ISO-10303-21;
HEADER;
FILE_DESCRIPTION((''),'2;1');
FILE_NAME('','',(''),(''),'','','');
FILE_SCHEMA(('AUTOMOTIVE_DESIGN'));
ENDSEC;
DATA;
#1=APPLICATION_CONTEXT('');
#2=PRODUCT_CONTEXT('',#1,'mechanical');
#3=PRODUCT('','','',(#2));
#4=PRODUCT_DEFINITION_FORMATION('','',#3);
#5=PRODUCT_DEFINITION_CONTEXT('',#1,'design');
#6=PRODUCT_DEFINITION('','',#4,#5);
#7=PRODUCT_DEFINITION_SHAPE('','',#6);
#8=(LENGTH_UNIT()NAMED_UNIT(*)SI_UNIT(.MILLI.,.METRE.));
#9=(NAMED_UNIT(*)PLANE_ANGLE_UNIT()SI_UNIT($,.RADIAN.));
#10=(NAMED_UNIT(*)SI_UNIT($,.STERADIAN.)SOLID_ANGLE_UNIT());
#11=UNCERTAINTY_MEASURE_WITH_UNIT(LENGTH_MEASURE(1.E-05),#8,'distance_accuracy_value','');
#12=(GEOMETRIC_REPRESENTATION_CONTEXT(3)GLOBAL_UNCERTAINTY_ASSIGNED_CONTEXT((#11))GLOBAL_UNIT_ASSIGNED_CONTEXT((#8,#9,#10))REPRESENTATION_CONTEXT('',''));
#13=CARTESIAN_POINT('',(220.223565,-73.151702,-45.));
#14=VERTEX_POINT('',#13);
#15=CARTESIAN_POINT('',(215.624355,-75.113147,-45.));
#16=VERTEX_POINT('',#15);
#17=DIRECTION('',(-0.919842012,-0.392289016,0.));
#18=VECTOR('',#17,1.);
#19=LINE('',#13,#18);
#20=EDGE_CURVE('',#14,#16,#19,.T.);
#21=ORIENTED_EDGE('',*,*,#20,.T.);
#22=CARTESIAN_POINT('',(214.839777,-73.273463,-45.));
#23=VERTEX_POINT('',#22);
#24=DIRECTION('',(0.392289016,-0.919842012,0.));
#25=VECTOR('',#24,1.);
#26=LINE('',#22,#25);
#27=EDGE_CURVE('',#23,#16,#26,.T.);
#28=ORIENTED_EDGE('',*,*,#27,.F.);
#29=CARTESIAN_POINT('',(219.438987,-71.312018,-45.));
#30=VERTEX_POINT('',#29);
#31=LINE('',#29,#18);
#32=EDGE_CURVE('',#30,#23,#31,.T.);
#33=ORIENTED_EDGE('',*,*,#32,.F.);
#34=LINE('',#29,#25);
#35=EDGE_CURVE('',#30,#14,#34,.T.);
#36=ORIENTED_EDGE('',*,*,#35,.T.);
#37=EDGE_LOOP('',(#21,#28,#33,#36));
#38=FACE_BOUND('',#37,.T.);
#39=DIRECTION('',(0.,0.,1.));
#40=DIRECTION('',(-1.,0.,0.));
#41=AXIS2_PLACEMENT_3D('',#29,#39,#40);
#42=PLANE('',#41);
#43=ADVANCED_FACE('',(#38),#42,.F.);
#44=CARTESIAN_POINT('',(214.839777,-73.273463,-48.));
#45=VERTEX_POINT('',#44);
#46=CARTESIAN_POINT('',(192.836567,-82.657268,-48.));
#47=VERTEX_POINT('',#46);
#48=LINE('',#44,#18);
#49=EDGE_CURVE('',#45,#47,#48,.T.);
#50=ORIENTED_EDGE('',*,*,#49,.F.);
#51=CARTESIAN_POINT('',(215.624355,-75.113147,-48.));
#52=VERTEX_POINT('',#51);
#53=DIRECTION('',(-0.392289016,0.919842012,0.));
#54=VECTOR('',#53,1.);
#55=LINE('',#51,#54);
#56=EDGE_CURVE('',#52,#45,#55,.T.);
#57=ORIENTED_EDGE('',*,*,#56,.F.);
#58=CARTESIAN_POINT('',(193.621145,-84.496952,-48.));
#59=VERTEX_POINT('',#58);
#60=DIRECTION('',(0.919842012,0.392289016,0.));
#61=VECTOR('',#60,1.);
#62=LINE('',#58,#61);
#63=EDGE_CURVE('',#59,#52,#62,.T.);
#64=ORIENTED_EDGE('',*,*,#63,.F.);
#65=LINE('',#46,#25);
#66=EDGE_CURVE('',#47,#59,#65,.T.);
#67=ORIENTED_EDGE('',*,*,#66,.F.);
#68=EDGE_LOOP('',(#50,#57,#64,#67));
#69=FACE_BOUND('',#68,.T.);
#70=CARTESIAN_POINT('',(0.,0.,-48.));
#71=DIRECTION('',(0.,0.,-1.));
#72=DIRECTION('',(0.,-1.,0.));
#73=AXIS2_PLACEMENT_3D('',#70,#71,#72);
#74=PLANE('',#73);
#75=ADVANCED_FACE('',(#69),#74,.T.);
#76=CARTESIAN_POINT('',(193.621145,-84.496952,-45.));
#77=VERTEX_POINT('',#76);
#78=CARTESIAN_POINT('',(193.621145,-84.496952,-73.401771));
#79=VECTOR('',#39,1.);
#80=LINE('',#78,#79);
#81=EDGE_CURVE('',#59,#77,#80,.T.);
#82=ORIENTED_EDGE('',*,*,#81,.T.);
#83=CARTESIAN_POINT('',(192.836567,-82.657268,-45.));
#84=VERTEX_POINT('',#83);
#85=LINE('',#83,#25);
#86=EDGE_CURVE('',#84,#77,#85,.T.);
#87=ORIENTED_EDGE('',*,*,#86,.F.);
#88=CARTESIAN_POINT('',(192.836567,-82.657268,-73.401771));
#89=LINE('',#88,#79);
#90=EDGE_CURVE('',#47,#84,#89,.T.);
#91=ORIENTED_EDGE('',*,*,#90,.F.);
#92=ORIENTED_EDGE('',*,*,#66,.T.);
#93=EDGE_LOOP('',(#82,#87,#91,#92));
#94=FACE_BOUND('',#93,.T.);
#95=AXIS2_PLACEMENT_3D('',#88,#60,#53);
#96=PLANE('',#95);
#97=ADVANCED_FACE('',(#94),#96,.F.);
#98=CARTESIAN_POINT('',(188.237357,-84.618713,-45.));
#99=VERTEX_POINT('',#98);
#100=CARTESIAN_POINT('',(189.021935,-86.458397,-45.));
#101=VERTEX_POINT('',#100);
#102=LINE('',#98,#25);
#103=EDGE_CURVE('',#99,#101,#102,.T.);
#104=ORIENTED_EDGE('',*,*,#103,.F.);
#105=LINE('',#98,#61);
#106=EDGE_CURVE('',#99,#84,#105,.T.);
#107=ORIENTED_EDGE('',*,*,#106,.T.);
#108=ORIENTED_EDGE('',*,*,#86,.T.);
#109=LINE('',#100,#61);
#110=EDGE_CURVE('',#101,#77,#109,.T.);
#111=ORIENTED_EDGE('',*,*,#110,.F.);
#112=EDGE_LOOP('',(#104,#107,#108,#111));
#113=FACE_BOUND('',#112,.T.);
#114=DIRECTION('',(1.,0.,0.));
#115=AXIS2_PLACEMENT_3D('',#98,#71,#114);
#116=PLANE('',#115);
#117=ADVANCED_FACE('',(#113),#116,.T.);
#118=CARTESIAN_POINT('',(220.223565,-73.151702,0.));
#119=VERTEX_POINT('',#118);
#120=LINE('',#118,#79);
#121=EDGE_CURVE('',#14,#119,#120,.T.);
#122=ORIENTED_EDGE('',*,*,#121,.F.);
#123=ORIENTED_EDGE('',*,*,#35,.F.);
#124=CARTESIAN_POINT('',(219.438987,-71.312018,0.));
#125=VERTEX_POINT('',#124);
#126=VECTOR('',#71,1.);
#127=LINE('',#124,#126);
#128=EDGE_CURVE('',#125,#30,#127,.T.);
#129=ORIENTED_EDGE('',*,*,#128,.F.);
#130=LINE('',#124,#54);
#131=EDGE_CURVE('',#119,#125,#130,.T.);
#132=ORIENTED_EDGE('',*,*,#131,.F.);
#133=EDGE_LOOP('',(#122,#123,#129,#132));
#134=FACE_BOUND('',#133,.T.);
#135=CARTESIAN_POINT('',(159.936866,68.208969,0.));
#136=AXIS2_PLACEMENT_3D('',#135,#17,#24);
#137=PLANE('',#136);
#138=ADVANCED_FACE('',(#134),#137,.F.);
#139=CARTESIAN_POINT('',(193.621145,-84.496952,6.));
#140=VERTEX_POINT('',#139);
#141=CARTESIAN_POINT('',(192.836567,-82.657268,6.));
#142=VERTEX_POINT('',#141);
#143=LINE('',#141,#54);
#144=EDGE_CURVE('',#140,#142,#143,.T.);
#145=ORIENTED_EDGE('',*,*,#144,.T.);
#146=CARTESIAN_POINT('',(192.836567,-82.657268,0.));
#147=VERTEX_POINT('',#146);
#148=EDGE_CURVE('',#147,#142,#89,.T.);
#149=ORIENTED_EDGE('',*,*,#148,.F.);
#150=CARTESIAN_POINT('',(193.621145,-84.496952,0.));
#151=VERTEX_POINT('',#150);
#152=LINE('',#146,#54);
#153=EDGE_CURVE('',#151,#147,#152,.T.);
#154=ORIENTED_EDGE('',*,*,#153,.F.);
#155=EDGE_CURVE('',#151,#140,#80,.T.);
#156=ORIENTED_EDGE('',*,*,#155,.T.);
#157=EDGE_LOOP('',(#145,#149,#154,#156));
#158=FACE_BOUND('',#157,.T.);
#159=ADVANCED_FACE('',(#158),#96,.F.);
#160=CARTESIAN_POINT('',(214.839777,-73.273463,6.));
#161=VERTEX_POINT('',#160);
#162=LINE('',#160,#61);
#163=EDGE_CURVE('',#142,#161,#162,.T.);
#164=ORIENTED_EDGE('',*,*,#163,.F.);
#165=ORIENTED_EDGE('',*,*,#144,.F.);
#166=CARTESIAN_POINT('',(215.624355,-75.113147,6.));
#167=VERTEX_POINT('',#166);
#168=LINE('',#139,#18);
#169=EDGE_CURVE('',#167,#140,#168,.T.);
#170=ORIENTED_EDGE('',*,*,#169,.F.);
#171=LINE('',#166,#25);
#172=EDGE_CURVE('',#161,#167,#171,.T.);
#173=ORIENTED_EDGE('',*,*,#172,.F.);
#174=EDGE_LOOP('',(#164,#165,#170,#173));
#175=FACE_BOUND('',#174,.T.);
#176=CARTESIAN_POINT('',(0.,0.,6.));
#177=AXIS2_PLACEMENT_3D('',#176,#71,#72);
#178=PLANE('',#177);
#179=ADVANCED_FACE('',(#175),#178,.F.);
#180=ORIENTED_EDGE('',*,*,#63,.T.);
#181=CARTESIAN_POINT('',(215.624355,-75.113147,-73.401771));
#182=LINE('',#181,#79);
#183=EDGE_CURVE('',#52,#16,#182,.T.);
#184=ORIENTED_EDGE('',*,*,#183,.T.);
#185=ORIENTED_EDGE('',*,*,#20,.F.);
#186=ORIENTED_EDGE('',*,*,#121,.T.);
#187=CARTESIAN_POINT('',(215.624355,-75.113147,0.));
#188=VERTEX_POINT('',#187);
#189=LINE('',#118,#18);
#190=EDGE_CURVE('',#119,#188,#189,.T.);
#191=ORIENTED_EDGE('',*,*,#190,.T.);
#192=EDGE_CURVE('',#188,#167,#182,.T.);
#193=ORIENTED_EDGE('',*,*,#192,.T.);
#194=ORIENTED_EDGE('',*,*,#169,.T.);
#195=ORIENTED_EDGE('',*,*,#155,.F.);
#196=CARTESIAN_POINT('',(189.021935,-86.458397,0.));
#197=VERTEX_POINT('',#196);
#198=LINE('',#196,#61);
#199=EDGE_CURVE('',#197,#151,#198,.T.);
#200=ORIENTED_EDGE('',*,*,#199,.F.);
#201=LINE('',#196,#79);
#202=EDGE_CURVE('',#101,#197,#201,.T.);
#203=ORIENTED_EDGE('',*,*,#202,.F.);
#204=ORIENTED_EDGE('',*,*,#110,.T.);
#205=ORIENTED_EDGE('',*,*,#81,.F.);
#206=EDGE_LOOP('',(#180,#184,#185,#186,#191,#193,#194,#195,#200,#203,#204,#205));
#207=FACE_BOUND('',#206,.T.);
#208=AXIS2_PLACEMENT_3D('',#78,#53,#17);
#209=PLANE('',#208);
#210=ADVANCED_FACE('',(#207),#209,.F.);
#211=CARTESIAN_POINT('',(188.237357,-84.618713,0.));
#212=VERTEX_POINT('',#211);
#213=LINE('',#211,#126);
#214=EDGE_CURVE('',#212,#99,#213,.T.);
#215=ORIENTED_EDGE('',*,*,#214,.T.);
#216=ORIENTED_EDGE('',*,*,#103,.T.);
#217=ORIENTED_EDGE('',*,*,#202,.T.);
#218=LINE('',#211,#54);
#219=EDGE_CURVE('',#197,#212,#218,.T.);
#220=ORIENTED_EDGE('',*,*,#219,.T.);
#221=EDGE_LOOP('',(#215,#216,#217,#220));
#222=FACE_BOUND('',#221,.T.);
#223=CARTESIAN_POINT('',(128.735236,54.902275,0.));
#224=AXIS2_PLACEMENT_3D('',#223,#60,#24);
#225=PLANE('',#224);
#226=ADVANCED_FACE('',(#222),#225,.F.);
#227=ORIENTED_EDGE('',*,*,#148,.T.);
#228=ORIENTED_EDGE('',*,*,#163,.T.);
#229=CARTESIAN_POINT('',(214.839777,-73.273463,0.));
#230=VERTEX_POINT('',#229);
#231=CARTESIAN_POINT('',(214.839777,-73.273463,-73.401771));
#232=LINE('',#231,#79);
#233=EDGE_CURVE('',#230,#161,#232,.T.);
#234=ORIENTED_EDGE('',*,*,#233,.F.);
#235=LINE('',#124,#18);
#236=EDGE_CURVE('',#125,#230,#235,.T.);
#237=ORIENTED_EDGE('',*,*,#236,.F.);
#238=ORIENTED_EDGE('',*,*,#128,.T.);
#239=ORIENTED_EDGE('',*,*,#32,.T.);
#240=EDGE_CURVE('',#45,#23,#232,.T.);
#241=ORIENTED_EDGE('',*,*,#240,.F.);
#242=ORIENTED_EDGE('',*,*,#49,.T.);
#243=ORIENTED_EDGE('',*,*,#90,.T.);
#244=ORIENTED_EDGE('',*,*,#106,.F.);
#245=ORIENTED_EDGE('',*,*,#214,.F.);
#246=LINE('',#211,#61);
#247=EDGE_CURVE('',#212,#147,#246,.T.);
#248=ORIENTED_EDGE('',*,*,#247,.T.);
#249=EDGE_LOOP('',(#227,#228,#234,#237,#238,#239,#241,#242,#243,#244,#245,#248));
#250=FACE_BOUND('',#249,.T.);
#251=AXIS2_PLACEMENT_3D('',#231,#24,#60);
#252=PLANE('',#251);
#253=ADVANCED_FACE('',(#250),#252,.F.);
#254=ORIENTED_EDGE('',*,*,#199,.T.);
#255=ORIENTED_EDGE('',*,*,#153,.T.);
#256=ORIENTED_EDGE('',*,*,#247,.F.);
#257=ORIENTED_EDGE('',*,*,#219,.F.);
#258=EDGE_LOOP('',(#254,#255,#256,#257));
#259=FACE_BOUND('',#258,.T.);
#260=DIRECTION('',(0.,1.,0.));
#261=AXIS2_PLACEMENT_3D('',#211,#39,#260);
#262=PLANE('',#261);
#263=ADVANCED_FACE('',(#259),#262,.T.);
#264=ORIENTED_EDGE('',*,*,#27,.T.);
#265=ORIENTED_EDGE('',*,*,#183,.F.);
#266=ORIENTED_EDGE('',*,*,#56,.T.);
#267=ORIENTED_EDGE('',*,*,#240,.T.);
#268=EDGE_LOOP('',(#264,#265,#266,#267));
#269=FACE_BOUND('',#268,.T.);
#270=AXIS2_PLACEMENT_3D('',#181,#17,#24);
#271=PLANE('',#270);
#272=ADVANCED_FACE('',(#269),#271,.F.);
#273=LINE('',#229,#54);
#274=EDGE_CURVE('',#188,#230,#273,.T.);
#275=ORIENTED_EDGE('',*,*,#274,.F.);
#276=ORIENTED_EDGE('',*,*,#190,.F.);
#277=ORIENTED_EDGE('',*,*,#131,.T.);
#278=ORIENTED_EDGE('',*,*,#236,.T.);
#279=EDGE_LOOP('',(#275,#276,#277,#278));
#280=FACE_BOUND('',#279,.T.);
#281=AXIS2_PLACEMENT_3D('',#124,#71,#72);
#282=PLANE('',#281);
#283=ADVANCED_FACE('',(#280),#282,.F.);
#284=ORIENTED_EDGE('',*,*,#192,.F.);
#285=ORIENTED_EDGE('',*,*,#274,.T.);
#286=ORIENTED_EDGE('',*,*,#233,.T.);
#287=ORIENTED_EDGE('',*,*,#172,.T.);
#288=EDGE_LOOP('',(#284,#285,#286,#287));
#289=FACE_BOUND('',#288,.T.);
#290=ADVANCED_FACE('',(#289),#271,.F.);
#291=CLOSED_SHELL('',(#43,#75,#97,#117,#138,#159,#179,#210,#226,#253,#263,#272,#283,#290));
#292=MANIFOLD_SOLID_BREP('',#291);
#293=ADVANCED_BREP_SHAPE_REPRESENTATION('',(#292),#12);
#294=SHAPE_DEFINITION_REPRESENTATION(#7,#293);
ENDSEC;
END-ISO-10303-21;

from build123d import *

# Parameters (mm, degrees)
ESTRUSIONE_ESTRUSIONE1_DEPTH      = 48
ESTRUSIONE_ESTRUSIONE1_DEPTH_BACK = 6
SCHIZZO2_W                        = 45
SCHIZZO2_H                        = 2
ESTRUSIONE_ESTRUSIONE2_DEPTH      = 5
CORPO_SPOSTA_COPIA1_START         = 139.953637561
CORPO_SPOSTA_COPIA1_OUTLINE_W     = 2
CORPO_SPOSTA_COPIA1_OUTLINE_H     = 42
CORPO_SPOSTA_COPIA1_DEPTH         = 33.920640211
CORPO_SPOSTA_COPIA1_2_OUTLINE_W   = 2
CORPO_SPOSTA_COPIA1_2_OUTLINE_H   = 6
CORPO_SPOSTA_COPIA1_2_DEPTH       = 5
CORPO_SPOSTA_COPIA1_START_2       = 168.874277772
CORPO_SPOSTA_COPIA1_3_OUTLINE_W   = 2
CORPO_SPOSTA_COPIA1_3_OUTLINE_H   = 6
CORPO_SPOSTA_COPIA1_3_DEPTH       = 5
CORPO_SPOSTA_COPIA1_4_OUTLINE_W   = 2
CORPO_SPOSTA_COPIA1_4_OUTLINE_H   = 45
CORPO_SPOSTA_COPIA1_4_DEPTH       = 33.920640211
CORPO_SPOSTA_COPIA1_START_3       = 144.953637561
CORPO_SPOSTA_COPIA1_5_OUTLINE_W   = 2
CORPO_SPOSTA_COPIA1_5_OUTLINE_H   = 3
CORPO_SPOSTA_COPIA1_5_DEPTH       = 23.920640211


# Read off the part's stored shape, not the designer's step: Corpo-Sposta/copia1
with BuildPart() as part:
    # Schizzo1 → Estrusione-Estrusione1 (new, two sides: drawn at the far end of the back side and taken through both)
    with BuildSketch(Plane.XY.offset(-ESTRUSIONE_ESTRUSIONE1_DEPTH_BACK)):
        Polygon((214.839776844, -73.273463404), (192.836567017, -82.657267824), (193.62114505, -84.496951848), (215.624354877, -75.113147429), align=None)
    extrude(amount=ESTRUSIONE_ESTRUSIONE1_DEPTH + ESTRUSIONE_ESTRUSIONE1_DEPTH_BACK)

    # Schizzo2 → Estrusione-Estrusione2 (add)
    with BuildSketch(Plane(origin=(155.337655494, 66.24752432, 0), x_dir=(0, 0, -1), z_dir=(0.919842012316021, 0.39228901638767966, 0))):
        with Locations((-22.5, -152.679294766)):
            Rectangle(SCHIZZO2_W, SCHIZZO2_H)
    estrusione_estrusione2 = extrude(amount=ESTRUSIONE_ESTRUSIONE2_DEPTH)

    # Specchia1: Estrusione-Estrusione2 across plane
    add(estrusione_estrusione2.mirror(Plane(origin=(144.33605058, 61.55562211, 0), x_dir=(0, 0, 1), z_dir=(0.9198420123160211, 0.3922890163876793, 0))))

    # Corpo-Sposta/copia1 outline → Corpo-Sposta/copia1 (cut)
    with BuildSketch(Plane(origin=(0, 0, 0), x_dir=(-0.39228901638766717, 0.9198420123160262, 0), z_dir=(0.9198420123160264, 0.3922890163876671, 0)).offset(CORPO_SPOSTA_COPIA1_START)):
        with Locations((-152.679294766, 27)):
            Rectangle(CORPO_SPOSTA_COPIA1_OUTLINE_W, CORPO_SPOSTA_COPIA1_OUTLINE_H)
    extrude(amount=CORPO_SPOSTA_COPIA1_DEPTH, mode=Mode.SUBTRACT)

    # Corpo-Sposta_copia1 2 outline → Corpo-Sposta_copia1 2 (cut)
    with BuildSketch(Plane(origin=(0, 0, 0), x_dir=(-0.39228901638766717, 0.9198420123160262, 0), z_dir=(0.9198420123160264, 0.3922890163876671, 0)).offset(CORPO_SPOSTA_COPIA1_START)):
        with Locations((-152.679294766, 3)):
            Rectangle(CORPO_SPOSTA_COPIA1_2_OUTLINE_W, CORPO_SPOSTA_COPIA1_2_OUTLINE_H)
    extrude(amount=CORPO_SPOSTA_COPIA1_2_DEPTH, mode=Mode.SUBTRACT)

    # Corpo-Sposta_copia1 3 outline → Corpo-Sposta_copia1 3 (cut)
    with BuildSketch(Plane(origin=(0, 0, 0), x_dir=(-0.39228901638766717, 0.9198420123160262, 0), z_dir=(0.9198420123160264, 0.3922890163876671, 0)).offset(CORPO_SPOSTA_COPIA1_START_2)):
        with Locations((-152.679294766, 3)):
            Rectangle(CORPO_SPOSTA_COPIA1_3_OUTLINE_W, CORPO_SPOSTA_COPIA1_3_OUTLINE_H)
    extrude(amount=CORPO_SPOSTA_COPIA1_3_DEPTH, mode=Mode.SUBTRACT)

    # Corpo-Sposta_copia1 4 outline → Corpo-Sposta_copia1 4 (add)
    with BuildSketch(Plane(origin=(0, 0, 0), x_dir=(-0.39228901638766717, 0.9198420123160262, 0), z_dir=(0.9198420123160264, 0.3922890163876671, 0)).offset(CORPO_SPOSTA_COPIA1_START)):
        with Locations((-152.679294766, -22.5)):
            Rectangle(CORPO_SPOSTA_COPIA1_4_OUTLINE_W, CORPO_SPOSTA_COPIA1_4_OUTLINE_H)
    extrude(amount=CORPO_SPOSTA_COPIA1_4_DEPTH)

    # Corpo-Sposta_copia1 5 outline → Corpo-Sposta_copia1 5 (add)
    with BuildSketch(Plane(origin=(0, 0, 0), x_dir=(-0.39228901638766717, 0.9198420123160262, 0), z_dir=(0.9198420123160264, 0.3922890163876671, 0)).offset(CORPO_SPOSTA_COPIA1_START_3)):
        with Locations((-152.679294766, -46.5)):
            Rectangle(CORPO_SPOSTA_COPIA1_5_OUTLINE_W, CORPO_SPOSTA_COPIA1_5_OUTLINE_H)
    extrude(amount=CORPO_SPOSTA_COPIA1_5_DEPTH)


solid = part.part
